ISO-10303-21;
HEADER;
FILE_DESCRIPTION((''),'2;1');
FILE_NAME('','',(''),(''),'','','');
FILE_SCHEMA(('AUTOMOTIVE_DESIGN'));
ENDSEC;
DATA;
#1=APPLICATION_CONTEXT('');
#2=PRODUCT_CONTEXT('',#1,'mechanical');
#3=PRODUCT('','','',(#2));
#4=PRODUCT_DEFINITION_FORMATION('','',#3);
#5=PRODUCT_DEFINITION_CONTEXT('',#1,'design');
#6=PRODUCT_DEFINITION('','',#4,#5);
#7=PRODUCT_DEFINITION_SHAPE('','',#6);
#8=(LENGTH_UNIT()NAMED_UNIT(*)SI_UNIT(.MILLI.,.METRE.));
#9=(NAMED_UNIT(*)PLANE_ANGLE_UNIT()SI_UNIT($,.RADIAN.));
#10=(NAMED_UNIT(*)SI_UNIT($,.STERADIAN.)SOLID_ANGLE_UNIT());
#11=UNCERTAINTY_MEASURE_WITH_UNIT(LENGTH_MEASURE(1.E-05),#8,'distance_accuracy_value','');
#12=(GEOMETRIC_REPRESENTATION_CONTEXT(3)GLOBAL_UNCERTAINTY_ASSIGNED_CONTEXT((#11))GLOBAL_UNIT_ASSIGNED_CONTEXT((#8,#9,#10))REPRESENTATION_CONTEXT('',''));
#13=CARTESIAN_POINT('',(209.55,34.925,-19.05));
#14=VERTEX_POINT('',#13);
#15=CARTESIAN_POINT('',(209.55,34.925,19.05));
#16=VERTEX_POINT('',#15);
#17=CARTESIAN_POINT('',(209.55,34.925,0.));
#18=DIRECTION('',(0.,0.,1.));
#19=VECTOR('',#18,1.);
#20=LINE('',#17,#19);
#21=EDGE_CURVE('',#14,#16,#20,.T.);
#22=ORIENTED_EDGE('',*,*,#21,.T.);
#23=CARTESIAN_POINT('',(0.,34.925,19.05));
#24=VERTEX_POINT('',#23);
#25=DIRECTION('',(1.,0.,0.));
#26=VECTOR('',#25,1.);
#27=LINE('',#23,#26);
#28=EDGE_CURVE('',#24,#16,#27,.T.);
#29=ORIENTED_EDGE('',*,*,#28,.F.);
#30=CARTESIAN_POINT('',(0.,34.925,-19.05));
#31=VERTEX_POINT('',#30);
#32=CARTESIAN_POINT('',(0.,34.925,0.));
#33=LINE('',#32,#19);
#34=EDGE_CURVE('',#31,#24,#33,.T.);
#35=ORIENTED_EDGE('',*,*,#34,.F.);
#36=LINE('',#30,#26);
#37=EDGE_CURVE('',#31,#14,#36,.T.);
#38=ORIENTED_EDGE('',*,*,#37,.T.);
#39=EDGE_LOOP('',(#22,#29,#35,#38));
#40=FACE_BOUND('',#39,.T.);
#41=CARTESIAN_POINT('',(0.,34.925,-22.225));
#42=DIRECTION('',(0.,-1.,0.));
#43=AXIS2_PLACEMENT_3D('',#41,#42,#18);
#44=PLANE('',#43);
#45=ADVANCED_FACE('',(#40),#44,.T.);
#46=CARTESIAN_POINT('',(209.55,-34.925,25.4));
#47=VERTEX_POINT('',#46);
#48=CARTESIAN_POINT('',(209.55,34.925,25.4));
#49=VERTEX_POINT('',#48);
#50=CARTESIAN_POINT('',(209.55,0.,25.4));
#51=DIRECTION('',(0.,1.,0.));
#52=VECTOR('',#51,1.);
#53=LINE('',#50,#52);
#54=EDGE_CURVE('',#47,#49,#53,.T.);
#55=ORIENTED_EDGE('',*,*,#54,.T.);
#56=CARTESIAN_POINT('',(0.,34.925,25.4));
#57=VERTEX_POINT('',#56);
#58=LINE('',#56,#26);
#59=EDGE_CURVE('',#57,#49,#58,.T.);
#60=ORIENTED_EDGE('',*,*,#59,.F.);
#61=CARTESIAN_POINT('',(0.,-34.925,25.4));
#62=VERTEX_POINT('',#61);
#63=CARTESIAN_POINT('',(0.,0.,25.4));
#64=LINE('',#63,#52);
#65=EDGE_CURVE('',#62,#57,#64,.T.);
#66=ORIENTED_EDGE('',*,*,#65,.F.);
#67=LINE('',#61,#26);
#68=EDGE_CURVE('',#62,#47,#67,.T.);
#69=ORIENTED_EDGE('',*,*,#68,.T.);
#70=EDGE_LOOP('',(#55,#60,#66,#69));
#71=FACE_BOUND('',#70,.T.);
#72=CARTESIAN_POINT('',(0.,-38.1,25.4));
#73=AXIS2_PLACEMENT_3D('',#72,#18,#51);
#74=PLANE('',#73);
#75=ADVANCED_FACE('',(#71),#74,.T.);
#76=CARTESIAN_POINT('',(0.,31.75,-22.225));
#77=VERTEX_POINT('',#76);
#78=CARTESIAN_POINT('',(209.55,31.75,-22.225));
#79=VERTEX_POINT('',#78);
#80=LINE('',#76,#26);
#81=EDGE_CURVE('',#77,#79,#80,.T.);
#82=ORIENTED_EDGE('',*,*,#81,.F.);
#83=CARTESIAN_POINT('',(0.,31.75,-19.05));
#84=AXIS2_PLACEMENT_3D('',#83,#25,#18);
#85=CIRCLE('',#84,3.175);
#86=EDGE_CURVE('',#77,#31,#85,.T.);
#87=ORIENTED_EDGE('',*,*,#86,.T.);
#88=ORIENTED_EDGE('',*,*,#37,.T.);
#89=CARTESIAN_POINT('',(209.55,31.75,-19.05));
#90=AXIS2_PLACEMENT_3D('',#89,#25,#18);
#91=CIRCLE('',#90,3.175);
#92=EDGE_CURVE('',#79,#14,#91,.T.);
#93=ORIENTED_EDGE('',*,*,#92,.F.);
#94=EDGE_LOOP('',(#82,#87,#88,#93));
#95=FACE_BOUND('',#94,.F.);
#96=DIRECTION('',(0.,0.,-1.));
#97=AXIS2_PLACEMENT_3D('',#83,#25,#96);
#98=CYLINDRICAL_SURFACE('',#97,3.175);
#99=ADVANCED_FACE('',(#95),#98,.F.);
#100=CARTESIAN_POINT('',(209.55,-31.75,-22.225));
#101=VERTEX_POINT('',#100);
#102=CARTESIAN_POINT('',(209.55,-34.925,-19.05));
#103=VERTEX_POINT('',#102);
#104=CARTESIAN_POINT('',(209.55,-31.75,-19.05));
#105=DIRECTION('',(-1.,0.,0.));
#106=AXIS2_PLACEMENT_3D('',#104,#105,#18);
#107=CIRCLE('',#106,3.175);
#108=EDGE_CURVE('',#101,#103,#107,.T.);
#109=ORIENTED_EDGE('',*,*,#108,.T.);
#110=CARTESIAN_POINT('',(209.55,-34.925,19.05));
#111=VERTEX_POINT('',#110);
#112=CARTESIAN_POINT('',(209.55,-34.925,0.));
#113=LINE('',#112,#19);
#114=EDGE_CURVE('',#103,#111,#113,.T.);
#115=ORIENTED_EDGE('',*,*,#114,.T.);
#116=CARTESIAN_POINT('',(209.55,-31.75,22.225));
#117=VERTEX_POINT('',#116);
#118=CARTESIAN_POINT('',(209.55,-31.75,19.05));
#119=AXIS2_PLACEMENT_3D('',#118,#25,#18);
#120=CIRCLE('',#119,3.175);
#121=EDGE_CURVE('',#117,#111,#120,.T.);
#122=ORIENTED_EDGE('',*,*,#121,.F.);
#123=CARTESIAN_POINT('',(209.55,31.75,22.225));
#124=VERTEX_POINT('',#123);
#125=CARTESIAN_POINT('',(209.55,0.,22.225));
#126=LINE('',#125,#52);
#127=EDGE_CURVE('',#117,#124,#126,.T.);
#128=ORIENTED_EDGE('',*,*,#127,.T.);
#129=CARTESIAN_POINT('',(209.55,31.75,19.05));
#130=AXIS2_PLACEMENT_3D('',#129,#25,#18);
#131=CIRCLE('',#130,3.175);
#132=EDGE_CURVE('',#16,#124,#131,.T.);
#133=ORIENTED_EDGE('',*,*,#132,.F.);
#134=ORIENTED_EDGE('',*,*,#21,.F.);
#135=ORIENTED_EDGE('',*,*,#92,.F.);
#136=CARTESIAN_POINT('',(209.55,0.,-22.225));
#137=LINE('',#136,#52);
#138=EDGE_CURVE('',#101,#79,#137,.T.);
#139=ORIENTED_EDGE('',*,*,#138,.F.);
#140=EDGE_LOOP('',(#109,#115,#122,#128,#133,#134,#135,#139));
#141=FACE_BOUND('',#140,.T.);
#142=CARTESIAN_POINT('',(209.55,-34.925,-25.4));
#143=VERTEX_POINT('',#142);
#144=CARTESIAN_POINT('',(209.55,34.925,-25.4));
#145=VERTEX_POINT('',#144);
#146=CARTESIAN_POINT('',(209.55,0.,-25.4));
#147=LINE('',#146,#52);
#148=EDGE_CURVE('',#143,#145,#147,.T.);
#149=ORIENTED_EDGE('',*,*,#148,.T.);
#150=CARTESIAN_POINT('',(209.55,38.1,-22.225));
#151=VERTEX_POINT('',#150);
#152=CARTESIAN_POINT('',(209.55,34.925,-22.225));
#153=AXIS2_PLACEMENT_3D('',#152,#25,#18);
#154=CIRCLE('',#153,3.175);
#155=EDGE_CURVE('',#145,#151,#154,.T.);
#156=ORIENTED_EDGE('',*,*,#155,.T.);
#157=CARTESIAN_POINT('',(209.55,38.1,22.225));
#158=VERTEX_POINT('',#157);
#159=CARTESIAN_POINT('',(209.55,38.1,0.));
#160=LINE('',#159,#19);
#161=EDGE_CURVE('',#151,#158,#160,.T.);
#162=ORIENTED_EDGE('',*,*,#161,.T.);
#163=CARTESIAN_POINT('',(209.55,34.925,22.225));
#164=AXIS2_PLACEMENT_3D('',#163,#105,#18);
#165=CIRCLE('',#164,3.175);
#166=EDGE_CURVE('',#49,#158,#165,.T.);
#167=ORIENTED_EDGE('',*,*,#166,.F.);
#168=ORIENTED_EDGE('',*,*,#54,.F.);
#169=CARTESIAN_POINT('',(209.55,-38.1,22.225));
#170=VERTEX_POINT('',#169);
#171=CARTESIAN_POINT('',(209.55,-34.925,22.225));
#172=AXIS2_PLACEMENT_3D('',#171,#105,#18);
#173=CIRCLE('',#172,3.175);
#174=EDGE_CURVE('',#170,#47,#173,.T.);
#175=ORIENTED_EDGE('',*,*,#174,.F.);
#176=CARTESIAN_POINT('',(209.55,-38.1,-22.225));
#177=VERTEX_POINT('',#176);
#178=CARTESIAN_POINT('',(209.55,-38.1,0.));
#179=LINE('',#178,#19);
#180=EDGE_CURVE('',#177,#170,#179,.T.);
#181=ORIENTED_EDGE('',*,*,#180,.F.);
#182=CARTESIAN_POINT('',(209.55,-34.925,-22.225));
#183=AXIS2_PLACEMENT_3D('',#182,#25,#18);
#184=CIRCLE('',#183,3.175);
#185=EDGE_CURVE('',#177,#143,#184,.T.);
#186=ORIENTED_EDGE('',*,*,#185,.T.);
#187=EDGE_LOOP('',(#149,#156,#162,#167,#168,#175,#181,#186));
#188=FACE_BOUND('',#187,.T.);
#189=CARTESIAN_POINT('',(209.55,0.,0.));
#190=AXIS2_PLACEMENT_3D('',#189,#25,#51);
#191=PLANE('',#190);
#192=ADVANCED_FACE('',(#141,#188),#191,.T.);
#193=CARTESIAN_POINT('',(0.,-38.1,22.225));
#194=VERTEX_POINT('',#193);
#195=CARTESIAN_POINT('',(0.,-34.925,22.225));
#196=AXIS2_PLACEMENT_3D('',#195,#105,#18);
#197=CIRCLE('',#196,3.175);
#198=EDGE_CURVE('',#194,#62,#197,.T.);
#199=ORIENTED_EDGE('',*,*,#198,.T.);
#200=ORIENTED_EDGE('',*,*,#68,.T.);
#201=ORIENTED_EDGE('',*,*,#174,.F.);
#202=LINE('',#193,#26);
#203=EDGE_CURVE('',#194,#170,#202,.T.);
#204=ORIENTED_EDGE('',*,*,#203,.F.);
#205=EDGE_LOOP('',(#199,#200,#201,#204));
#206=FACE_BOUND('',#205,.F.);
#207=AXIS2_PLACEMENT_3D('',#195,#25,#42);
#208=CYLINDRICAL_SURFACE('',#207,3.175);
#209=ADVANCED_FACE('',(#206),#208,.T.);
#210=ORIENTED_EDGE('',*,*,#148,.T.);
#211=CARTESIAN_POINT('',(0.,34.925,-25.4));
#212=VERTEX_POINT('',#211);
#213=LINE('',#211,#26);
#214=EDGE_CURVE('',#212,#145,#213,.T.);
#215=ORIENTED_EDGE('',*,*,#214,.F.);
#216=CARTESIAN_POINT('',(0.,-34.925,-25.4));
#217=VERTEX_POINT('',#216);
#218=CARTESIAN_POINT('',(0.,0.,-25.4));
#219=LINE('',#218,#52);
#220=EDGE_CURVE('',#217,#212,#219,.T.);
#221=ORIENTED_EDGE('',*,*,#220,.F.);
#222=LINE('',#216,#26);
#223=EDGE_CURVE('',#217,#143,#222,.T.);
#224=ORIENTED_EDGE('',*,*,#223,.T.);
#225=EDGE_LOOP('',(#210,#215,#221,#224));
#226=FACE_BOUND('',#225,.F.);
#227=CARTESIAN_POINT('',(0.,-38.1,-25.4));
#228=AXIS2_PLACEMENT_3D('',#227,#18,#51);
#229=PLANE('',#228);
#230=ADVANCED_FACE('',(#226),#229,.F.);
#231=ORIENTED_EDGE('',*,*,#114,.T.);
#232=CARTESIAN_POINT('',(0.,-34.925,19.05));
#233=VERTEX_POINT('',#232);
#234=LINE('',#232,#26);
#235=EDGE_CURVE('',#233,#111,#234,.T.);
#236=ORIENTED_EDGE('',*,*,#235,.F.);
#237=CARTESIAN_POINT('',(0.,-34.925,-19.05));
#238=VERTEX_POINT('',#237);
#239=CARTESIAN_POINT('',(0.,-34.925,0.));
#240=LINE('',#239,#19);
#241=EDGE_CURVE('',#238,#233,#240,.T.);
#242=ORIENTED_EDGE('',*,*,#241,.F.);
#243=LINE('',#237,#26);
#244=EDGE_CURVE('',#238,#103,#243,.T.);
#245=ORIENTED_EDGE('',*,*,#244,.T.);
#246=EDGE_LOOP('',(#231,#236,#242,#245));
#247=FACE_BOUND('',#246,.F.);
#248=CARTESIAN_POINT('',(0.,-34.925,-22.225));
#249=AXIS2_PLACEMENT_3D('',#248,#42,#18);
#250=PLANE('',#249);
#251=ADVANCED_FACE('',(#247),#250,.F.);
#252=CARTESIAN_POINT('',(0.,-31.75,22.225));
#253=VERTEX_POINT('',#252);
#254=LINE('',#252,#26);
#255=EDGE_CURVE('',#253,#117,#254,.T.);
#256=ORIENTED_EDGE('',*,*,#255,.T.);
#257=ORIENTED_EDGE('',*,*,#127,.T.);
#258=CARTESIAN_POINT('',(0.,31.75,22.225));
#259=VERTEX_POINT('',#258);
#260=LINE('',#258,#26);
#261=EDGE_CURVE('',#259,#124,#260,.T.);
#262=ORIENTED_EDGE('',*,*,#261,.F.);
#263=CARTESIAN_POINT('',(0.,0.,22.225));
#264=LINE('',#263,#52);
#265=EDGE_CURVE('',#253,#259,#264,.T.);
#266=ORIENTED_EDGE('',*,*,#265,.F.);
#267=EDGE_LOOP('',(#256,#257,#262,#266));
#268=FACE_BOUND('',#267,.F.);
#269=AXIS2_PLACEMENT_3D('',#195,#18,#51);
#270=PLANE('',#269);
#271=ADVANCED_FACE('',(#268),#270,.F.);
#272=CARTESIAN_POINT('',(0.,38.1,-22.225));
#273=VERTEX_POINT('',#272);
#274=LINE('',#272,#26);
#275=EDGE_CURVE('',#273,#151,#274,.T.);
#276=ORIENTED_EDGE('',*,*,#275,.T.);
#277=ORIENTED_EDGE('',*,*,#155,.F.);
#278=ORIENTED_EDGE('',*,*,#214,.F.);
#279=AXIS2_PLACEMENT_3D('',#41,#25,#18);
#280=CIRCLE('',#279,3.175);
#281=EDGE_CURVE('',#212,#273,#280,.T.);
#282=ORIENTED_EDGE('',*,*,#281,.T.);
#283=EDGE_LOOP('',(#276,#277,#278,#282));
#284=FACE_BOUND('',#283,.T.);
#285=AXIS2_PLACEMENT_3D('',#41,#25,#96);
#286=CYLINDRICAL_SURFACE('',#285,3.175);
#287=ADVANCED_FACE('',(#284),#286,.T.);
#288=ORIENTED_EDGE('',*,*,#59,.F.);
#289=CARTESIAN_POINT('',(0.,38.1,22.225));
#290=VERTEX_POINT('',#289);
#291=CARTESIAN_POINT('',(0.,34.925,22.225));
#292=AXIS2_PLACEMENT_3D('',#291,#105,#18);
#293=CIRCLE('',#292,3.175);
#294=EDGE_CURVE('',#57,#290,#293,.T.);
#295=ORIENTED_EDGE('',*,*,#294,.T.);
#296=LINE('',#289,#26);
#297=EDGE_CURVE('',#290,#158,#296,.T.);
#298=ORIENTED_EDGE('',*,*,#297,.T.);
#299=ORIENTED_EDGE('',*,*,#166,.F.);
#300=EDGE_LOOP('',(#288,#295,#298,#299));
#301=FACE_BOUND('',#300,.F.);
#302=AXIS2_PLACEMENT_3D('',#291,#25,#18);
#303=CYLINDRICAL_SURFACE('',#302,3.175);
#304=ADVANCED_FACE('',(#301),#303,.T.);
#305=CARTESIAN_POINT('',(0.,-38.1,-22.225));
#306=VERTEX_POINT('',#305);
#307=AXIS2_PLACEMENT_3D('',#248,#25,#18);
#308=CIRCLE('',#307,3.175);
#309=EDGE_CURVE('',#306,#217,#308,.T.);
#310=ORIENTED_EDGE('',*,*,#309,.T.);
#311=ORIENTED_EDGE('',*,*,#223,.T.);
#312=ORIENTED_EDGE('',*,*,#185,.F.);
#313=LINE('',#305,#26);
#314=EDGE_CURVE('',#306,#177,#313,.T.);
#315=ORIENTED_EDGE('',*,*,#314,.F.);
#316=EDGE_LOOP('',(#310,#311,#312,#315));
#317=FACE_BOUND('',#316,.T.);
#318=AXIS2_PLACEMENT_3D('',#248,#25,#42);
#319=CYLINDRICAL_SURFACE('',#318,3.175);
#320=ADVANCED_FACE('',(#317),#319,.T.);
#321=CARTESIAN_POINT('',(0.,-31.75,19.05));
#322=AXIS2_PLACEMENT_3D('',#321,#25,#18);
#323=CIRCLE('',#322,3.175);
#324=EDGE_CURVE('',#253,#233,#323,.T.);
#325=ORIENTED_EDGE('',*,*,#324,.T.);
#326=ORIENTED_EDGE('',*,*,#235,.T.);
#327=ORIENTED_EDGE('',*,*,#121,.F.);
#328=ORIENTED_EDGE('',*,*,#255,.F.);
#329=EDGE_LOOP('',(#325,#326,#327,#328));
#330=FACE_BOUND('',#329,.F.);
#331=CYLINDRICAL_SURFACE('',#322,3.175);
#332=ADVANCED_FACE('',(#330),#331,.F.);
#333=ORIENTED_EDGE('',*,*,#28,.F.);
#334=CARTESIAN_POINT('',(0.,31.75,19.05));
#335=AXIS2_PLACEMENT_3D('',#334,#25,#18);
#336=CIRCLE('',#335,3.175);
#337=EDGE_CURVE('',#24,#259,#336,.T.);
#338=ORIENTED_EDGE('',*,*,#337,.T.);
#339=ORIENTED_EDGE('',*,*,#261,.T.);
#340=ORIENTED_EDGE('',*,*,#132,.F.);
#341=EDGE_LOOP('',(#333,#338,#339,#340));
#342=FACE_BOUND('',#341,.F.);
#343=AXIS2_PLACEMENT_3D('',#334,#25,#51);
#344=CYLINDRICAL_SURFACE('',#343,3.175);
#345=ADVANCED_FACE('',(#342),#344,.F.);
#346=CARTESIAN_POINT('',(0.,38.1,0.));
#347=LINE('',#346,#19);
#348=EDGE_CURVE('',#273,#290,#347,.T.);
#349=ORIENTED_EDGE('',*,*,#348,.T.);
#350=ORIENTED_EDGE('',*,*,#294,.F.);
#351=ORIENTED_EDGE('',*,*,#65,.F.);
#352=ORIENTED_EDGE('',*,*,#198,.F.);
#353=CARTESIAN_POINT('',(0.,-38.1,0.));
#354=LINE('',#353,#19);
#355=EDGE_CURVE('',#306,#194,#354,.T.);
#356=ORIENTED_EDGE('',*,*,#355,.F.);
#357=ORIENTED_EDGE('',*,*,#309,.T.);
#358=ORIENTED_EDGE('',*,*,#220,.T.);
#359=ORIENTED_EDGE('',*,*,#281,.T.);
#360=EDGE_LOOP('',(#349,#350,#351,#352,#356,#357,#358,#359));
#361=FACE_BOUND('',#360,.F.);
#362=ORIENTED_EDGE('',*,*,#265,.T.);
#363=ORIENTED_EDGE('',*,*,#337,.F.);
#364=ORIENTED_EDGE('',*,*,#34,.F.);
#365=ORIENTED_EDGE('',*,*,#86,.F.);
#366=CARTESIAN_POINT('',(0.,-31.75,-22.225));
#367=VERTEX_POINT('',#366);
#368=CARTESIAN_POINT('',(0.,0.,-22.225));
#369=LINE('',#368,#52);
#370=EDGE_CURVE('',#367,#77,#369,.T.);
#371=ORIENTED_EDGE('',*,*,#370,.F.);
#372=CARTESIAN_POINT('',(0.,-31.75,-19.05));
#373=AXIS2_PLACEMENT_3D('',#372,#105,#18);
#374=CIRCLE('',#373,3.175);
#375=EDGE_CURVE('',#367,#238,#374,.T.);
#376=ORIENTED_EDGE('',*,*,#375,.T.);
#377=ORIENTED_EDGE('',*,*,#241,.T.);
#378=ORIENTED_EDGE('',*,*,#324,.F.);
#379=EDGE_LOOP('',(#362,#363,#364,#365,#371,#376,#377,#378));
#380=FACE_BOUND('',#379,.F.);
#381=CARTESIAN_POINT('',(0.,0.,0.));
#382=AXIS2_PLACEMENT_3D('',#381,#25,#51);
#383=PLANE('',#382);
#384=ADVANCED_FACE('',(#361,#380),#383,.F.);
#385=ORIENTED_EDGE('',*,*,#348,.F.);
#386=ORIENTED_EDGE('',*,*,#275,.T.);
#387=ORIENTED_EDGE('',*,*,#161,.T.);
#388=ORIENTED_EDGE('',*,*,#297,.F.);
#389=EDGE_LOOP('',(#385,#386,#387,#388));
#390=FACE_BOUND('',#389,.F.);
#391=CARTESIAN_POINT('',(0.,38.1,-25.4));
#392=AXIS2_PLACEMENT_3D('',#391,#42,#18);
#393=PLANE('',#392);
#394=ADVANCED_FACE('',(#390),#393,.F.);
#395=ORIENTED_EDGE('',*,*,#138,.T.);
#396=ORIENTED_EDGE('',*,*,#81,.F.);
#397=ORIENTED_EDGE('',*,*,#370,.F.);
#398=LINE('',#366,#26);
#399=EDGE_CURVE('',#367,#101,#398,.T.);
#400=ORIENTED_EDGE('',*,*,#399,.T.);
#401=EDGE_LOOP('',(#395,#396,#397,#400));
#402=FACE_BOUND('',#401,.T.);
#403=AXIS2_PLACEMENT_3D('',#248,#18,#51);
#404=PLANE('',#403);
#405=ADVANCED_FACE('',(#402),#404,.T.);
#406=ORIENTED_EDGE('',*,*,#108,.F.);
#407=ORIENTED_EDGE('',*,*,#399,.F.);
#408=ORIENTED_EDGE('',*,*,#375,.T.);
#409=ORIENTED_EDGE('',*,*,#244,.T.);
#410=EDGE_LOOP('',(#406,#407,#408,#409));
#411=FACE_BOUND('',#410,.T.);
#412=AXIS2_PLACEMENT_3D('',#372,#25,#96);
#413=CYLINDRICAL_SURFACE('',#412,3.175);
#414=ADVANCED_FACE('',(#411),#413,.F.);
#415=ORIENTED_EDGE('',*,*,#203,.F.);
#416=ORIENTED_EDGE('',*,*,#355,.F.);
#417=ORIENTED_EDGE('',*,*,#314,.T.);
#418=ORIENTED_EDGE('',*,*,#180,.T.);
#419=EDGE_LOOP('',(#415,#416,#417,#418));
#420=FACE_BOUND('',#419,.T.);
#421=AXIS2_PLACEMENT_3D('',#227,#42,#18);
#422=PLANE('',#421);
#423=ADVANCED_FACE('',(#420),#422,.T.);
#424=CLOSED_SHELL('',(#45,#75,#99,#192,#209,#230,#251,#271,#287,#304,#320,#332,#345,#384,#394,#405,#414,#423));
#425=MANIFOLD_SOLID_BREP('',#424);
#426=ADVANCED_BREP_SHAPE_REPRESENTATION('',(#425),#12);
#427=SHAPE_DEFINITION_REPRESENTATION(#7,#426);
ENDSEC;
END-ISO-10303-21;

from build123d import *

# Parameters (mm, degrees)
F0_W     = 76.2
F0_H     = 50.8
F0_W_2   = 69.85
F0_H_2   = 44.45
F2_DEPTH = 209.55
F3_R     = 3.175


# Not quite as in the source:
# - a variable given as a bare number and used for a length is read in inches; the dataset says mm whatever the document's units were


with BuildPart() as f2:
    # F0 (on Right) → F2 (new body)
    with BuildSketch(Plane.YZ):
        Rectangle(F0_W, F0_H)
        Rectangle(F0_W_2, F0_H_2, mode=Mode.SUBTRACT)
    extrude(amount=F2_DEPTH)

    # F3
    f3_edges = [f2.edges().sort_by_distance(p)[0] for p in [
        (104.775, 38.1, 25.4),
        (104.775, 38.1, -25.4),
        (104.775, -38.1, -25.4),
        (104.775, -38.1, 25.4),
        (104.775, 34.925, -22.225),
        (104.775, 34.925, 22.225),
        (104.775, -34.925, 22.225),
        (104.775, -34.925, -22.225),
    ]]
    fillet(f3_edges, radius=F3_R)


solid = f2.part
